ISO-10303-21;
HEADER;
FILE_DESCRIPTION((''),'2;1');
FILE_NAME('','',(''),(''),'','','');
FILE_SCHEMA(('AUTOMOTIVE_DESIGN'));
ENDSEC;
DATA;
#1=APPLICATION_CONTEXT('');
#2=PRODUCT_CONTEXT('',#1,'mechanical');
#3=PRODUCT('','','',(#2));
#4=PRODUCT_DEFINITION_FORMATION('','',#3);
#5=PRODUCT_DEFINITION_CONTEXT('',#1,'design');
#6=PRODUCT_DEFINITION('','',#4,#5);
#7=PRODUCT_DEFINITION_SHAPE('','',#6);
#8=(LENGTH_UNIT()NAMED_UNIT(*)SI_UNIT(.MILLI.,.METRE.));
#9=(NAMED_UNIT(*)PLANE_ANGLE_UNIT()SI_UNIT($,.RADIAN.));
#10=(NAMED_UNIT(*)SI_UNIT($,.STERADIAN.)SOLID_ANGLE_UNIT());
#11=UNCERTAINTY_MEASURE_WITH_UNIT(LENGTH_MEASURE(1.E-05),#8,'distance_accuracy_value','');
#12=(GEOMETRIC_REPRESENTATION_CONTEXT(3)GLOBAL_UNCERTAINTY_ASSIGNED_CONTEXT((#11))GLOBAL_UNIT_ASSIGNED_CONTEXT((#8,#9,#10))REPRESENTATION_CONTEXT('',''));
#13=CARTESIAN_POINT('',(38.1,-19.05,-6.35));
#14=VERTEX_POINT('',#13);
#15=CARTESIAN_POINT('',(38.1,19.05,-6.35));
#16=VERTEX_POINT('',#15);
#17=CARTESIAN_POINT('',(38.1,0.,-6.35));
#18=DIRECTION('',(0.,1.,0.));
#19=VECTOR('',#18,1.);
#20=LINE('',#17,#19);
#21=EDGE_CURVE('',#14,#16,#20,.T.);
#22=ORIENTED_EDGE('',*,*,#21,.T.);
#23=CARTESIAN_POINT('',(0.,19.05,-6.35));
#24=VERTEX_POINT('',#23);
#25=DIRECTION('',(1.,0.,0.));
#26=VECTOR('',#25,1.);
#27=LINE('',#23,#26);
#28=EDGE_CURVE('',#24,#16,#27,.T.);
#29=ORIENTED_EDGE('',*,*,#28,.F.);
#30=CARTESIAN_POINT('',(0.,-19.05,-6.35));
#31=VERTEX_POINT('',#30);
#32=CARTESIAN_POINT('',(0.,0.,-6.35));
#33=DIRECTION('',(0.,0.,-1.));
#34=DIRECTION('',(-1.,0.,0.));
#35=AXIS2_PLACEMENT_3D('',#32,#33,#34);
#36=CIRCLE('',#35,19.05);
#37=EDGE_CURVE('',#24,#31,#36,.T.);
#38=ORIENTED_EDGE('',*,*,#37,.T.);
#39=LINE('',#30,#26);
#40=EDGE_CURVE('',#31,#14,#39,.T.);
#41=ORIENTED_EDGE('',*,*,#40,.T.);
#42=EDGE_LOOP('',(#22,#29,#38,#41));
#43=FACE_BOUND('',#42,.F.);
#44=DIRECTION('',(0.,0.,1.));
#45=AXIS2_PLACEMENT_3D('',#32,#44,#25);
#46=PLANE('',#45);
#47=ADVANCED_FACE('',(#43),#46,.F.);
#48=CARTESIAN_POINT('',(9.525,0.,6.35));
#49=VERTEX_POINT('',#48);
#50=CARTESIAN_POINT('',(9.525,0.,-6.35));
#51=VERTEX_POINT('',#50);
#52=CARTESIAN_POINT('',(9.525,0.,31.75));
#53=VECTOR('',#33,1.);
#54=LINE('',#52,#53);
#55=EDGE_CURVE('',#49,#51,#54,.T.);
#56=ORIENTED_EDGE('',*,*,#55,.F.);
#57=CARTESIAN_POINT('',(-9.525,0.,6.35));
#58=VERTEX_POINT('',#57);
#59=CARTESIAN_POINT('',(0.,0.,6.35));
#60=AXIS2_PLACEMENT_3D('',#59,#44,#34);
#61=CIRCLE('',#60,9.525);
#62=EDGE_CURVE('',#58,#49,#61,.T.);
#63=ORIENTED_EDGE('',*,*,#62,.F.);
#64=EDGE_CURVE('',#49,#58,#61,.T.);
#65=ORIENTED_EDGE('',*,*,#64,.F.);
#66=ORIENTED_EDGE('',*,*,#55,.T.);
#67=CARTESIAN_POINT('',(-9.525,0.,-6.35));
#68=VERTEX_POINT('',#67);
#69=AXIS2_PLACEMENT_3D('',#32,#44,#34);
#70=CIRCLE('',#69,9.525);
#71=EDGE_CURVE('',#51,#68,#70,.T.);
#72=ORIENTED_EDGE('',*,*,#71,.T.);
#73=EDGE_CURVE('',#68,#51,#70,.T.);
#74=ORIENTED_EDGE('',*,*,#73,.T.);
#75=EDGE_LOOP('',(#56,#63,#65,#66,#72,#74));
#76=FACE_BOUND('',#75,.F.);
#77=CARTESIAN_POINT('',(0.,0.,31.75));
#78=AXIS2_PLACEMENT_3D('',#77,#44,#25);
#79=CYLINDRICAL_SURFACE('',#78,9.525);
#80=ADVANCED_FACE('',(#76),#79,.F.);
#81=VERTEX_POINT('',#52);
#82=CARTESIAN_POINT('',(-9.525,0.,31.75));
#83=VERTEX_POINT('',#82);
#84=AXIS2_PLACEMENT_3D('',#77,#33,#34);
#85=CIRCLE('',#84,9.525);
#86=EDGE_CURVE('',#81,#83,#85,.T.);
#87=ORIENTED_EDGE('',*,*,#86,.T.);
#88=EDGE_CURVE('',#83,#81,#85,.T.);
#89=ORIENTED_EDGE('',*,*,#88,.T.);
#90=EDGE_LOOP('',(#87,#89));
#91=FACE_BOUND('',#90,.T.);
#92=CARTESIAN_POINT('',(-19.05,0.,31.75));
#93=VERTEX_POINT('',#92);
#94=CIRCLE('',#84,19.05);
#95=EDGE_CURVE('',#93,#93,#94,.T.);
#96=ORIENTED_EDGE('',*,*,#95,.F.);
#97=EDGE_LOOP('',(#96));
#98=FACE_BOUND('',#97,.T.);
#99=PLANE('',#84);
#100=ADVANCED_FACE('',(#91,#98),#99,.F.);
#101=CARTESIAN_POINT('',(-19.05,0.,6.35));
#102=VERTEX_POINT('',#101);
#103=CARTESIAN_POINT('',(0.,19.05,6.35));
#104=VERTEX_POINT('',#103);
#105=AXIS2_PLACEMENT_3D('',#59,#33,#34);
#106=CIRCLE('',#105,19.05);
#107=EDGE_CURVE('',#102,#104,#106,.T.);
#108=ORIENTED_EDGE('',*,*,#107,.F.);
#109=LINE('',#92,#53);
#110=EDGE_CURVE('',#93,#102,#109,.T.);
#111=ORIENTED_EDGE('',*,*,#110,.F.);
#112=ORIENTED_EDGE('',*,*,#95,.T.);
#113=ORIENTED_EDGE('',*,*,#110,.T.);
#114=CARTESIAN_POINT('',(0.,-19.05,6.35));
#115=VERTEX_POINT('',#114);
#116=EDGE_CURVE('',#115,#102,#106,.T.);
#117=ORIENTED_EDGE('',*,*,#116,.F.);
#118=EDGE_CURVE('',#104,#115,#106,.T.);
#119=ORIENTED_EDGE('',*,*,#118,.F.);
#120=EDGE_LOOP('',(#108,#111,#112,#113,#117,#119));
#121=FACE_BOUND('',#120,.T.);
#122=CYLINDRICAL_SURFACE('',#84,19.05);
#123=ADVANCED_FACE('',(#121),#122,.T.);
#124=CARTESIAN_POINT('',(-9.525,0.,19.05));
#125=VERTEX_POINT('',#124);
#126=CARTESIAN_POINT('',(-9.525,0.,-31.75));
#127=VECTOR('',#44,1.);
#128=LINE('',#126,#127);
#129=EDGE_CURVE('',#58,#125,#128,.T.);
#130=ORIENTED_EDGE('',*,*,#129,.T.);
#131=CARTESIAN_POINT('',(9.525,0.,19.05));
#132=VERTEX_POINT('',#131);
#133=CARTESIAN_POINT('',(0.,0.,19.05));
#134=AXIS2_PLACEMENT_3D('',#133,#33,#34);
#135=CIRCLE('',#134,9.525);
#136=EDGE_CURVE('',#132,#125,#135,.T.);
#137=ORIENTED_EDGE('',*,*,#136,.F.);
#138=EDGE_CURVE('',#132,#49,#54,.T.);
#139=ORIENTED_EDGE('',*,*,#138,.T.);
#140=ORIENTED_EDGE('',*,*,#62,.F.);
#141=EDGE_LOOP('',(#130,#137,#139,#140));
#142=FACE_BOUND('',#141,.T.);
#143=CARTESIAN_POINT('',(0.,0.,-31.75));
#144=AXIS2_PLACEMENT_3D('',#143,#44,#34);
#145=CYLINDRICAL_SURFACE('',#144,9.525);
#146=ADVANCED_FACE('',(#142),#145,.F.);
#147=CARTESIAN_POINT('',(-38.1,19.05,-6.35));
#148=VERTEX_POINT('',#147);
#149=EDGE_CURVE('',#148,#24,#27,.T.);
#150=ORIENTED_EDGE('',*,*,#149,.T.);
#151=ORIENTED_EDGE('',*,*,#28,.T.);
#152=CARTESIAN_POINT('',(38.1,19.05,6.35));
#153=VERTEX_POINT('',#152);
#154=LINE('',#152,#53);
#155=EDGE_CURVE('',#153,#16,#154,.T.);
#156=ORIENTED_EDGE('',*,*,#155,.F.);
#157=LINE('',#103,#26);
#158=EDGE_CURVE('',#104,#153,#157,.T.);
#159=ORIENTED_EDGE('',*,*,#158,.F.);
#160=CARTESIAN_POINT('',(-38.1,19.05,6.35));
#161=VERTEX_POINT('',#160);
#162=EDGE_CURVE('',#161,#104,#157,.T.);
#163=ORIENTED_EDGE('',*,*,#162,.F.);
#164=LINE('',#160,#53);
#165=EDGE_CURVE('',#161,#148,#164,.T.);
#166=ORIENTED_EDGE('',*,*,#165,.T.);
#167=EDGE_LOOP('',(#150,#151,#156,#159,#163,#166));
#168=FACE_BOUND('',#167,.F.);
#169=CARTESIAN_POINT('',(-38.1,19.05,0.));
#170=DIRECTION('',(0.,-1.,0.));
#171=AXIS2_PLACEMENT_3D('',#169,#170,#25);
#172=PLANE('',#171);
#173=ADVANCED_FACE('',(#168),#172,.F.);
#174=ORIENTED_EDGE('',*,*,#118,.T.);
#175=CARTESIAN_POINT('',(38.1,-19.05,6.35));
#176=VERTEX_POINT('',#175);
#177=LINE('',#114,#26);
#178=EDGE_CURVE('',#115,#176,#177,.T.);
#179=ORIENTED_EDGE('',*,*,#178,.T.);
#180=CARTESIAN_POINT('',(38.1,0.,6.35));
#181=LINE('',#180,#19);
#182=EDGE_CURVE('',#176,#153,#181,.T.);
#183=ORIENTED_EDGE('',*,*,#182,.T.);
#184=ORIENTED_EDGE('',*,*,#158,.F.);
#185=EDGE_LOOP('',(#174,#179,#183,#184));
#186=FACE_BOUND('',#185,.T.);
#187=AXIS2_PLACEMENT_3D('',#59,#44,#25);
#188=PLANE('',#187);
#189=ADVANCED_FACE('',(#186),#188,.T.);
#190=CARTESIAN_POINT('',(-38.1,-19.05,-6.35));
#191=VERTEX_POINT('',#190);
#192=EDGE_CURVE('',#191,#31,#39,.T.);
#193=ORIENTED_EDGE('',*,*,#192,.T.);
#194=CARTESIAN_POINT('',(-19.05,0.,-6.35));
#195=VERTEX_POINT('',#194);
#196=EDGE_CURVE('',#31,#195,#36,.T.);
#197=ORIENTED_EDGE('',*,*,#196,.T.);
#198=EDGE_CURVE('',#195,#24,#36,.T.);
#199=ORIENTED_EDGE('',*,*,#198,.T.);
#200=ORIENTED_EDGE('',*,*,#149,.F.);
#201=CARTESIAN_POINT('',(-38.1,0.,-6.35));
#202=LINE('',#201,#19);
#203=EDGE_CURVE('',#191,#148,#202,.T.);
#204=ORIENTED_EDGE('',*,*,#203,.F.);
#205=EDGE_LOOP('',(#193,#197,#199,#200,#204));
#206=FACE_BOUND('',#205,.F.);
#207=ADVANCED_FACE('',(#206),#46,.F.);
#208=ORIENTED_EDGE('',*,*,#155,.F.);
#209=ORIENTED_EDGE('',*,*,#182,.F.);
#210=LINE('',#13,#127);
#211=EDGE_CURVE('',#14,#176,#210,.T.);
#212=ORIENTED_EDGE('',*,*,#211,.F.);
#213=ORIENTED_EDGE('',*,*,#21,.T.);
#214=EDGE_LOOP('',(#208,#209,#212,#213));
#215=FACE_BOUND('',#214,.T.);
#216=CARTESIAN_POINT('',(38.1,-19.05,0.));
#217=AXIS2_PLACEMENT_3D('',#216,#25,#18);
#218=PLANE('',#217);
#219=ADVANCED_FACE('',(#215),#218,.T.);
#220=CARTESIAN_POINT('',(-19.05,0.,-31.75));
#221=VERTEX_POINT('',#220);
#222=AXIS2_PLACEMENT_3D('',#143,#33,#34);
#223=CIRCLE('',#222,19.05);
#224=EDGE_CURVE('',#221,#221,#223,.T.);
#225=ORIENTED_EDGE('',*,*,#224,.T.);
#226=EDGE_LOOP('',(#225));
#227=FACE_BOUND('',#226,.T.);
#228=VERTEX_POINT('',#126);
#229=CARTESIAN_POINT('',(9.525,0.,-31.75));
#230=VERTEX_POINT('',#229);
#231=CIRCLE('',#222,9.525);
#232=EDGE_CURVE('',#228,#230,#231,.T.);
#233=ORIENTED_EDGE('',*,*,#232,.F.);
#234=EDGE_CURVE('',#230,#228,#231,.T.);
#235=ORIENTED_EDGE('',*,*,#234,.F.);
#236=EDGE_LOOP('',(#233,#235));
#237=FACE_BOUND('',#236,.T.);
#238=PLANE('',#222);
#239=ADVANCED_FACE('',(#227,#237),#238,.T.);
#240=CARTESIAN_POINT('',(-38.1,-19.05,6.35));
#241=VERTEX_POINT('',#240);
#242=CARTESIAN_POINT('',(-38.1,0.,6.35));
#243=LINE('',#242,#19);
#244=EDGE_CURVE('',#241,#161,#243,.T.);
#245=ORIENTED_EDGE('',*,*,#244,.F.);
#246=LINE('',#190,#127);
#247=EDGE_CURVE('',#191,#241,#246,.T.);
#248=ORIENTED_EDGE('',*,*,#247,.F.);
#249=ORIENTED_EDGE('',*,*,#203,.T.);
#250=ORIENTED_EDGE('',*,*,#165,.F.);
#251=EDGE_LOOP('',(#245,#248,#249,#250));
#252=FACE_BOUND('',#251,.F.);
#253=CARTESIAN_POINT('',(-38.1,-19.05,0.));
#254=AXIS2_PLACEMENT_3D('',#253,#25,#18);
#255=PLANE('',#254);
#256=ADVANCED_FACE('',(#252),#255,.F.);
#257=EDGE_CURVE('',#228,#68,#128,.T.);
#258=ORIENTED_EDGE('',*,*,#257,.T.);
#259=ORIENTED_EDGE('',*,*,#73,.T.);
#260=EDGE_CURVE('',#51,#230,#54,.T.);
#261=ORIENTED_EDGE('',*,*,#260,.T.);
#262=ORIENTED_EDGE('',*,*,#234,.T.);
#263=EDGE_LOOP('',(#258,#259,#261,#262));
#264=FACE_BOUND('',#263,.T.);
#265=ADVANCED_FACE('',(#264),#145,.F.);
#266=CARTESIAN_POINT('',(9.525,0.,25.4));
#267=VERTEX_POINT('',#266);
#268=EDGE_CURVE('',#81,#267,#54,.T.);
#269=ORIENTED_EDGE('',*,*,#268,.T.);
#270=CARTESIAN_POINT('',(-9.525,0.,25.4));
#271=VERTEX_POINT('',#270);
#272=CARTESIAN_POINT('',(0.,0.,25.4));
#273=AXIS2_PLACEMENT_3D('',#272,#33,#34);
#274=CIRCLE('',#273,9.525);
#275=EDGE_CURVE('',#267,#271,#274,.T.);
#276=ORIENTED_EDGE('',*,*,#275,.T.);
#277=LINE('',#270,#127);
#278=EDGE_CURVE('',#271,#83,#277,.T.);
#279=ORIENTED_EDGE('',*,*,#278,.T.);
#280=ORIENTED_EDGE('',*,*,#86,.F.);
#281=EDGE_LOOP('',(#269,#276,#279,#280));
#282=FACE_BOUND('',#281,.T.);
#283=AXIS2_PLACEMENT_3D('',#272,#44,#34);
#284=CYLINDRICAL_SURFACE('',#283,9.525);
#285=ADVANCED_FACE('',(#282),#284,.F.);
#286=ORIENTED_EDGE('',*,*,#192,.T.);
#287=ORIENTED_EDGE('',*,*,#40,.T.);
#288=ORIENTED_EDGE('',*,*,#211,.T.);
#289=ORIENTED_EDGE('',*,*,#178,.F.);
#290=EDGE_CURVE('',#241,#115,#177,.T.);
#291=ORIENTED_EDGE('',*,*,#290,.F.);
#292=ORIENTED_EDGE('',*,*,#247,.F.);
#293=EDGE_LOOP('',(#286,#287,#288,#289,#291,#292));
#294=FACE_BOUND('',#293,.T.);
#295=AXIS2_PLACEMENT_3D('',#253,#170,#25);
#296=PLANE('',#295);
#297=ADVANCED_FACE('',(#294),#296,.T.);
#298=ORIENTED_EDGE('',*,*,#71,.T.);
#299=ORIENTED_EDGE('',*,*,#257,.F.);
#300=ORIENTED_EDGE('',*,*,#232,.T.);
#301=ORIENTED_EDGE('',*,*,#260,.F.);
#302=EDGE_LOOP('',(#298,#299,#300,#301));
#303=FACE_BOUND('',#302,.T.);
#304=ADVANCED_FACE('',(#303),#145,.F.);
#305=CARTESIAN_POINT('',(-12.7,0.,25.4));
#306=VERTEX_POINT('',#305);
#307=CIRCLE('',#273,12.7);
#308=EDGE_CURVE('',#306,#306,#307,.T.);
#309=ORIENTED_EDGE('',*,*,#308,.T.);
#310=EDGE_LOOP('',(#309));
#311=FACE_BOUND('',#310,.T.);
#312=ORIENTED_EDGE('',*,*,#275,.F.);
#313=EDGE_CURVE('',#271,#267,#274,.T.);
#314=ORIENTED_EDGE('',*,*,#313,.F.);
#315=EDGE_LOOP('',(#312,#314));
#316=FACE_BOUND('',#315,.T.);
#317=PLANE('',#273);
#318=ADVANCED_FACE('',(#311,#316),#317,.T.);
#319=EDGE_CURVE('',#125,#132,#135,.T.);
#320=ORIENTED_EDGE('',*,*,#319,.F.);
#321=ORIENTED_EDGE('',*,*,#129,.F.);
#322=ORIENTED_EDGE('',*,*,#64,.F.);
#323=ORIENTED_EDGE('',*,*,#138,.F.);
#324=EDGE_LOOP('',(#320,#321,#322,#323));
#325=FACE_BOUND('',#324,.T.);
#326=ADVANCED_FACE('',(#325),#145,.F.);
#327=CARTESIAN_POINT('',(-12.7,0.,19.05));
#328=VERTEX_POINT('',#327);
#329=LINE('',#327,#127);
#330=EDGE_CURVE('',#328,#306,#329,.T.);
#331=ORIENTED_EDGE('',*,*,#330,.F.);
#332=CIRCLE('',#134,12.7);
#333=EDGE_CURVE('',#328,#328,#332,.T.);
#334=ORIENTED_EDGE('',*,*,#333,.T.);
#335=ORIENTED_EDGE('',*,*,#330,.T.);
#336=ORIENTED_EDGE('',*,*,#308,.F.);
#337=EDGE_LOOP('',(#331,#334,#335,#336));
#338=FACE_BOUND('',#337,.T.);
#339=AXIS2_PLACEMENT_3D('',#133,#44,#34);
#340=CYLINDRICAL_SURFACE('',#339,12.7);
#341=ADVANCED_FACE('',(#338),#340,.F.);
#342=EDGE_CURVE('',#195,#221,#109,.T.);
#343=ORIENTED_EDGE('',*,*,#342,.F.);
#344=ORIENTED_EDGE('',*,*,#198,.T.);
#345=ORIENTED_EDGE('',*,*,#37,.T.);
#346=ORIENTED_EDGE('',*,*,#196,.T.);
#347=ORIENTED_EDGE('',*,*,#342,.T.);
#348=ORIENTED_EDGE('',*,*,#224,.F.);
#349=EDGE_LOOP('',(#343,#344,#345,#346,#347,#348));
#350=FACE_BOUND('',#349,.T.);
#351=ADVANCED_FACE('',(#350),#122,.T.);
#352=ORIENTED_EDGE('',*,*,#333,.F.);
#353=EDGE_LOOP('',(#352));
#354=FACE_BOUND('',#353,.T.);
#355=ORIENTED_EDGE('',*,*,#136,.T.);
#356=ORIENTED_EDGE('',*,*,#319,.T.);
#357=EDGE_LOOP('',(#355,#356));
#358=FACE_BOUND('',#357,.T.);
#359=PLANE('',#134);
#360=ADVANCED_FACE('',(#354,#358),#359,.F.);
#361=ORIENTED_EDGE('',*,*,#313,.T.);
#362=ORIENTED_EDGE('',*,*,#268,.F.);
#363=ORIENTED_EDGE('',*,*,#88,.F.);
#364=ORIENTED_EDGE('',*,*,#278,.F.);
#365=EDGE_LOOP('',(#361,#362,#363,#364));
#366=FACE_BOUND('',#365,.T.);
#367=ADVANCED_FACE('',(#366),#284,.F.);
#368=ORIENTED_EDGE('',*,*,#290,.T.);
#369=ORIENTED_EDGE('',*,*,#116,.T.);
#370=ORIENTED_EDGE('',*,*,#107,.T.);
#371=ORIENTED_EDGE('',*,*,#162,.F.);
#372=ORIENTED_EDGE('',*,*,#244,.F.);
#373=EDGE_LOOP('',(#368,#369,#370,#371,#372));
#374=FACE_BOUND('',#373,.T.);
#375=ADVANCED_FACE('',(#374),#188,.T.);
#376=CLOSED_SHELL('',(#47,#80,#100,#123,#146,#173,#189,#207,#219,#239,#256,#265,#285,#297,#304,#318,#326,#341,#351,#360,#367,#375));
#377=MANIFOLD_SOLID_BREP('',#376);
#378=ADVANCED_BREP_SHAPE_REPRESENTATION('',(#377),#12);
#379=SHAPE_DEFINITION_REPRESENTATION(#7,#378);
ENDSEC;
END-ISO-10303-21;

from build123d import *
from build123d import SkipClean  # not in build123d's __all__

# Parameters (mm, degrees)
F2_W     = 76.2
F2_H     = 38.1
F3_DEPTH = 6.35
F4_R     = 9.525
F5_DEPTH = 63.501


with BuildPart() as f1:
    # F0 (on Front) → F1 (revolve)
    with BuildSketch(Plane.XZ):
        Polygon((-9.525, 25.4), (-9.525, 31.75), (-19.05, 31.75), (-19.05, -31.75), (-9.525, -31.75), (-9.525, 19.05), (-12.7, 19.05), (-12.7, 25.4), align=None)
    revolve(axis=Axis((0, 0, 1.6377754509), (0, 0, -1)))

    # F2 (on Top) → F3 (join, symmetric)
    with BuildSketch(Plane.XY):
        Rectangle(F2_W, F2_H)
    extrude(amount=F3_DEPTH, both=True)

    # F4 (on face) → F5 (cut, through all)
    with BuildSketch(Plane.XY.offset(31.75)):
        Circle(F4_R)
    with SkipClean():  # cleaning this boolean's faces spoils the solid; the shape is the same uncleaned
        extrude(amount=-F5_DEPTH, mode=Mode.SUBTRACT)


solid = f1.part
